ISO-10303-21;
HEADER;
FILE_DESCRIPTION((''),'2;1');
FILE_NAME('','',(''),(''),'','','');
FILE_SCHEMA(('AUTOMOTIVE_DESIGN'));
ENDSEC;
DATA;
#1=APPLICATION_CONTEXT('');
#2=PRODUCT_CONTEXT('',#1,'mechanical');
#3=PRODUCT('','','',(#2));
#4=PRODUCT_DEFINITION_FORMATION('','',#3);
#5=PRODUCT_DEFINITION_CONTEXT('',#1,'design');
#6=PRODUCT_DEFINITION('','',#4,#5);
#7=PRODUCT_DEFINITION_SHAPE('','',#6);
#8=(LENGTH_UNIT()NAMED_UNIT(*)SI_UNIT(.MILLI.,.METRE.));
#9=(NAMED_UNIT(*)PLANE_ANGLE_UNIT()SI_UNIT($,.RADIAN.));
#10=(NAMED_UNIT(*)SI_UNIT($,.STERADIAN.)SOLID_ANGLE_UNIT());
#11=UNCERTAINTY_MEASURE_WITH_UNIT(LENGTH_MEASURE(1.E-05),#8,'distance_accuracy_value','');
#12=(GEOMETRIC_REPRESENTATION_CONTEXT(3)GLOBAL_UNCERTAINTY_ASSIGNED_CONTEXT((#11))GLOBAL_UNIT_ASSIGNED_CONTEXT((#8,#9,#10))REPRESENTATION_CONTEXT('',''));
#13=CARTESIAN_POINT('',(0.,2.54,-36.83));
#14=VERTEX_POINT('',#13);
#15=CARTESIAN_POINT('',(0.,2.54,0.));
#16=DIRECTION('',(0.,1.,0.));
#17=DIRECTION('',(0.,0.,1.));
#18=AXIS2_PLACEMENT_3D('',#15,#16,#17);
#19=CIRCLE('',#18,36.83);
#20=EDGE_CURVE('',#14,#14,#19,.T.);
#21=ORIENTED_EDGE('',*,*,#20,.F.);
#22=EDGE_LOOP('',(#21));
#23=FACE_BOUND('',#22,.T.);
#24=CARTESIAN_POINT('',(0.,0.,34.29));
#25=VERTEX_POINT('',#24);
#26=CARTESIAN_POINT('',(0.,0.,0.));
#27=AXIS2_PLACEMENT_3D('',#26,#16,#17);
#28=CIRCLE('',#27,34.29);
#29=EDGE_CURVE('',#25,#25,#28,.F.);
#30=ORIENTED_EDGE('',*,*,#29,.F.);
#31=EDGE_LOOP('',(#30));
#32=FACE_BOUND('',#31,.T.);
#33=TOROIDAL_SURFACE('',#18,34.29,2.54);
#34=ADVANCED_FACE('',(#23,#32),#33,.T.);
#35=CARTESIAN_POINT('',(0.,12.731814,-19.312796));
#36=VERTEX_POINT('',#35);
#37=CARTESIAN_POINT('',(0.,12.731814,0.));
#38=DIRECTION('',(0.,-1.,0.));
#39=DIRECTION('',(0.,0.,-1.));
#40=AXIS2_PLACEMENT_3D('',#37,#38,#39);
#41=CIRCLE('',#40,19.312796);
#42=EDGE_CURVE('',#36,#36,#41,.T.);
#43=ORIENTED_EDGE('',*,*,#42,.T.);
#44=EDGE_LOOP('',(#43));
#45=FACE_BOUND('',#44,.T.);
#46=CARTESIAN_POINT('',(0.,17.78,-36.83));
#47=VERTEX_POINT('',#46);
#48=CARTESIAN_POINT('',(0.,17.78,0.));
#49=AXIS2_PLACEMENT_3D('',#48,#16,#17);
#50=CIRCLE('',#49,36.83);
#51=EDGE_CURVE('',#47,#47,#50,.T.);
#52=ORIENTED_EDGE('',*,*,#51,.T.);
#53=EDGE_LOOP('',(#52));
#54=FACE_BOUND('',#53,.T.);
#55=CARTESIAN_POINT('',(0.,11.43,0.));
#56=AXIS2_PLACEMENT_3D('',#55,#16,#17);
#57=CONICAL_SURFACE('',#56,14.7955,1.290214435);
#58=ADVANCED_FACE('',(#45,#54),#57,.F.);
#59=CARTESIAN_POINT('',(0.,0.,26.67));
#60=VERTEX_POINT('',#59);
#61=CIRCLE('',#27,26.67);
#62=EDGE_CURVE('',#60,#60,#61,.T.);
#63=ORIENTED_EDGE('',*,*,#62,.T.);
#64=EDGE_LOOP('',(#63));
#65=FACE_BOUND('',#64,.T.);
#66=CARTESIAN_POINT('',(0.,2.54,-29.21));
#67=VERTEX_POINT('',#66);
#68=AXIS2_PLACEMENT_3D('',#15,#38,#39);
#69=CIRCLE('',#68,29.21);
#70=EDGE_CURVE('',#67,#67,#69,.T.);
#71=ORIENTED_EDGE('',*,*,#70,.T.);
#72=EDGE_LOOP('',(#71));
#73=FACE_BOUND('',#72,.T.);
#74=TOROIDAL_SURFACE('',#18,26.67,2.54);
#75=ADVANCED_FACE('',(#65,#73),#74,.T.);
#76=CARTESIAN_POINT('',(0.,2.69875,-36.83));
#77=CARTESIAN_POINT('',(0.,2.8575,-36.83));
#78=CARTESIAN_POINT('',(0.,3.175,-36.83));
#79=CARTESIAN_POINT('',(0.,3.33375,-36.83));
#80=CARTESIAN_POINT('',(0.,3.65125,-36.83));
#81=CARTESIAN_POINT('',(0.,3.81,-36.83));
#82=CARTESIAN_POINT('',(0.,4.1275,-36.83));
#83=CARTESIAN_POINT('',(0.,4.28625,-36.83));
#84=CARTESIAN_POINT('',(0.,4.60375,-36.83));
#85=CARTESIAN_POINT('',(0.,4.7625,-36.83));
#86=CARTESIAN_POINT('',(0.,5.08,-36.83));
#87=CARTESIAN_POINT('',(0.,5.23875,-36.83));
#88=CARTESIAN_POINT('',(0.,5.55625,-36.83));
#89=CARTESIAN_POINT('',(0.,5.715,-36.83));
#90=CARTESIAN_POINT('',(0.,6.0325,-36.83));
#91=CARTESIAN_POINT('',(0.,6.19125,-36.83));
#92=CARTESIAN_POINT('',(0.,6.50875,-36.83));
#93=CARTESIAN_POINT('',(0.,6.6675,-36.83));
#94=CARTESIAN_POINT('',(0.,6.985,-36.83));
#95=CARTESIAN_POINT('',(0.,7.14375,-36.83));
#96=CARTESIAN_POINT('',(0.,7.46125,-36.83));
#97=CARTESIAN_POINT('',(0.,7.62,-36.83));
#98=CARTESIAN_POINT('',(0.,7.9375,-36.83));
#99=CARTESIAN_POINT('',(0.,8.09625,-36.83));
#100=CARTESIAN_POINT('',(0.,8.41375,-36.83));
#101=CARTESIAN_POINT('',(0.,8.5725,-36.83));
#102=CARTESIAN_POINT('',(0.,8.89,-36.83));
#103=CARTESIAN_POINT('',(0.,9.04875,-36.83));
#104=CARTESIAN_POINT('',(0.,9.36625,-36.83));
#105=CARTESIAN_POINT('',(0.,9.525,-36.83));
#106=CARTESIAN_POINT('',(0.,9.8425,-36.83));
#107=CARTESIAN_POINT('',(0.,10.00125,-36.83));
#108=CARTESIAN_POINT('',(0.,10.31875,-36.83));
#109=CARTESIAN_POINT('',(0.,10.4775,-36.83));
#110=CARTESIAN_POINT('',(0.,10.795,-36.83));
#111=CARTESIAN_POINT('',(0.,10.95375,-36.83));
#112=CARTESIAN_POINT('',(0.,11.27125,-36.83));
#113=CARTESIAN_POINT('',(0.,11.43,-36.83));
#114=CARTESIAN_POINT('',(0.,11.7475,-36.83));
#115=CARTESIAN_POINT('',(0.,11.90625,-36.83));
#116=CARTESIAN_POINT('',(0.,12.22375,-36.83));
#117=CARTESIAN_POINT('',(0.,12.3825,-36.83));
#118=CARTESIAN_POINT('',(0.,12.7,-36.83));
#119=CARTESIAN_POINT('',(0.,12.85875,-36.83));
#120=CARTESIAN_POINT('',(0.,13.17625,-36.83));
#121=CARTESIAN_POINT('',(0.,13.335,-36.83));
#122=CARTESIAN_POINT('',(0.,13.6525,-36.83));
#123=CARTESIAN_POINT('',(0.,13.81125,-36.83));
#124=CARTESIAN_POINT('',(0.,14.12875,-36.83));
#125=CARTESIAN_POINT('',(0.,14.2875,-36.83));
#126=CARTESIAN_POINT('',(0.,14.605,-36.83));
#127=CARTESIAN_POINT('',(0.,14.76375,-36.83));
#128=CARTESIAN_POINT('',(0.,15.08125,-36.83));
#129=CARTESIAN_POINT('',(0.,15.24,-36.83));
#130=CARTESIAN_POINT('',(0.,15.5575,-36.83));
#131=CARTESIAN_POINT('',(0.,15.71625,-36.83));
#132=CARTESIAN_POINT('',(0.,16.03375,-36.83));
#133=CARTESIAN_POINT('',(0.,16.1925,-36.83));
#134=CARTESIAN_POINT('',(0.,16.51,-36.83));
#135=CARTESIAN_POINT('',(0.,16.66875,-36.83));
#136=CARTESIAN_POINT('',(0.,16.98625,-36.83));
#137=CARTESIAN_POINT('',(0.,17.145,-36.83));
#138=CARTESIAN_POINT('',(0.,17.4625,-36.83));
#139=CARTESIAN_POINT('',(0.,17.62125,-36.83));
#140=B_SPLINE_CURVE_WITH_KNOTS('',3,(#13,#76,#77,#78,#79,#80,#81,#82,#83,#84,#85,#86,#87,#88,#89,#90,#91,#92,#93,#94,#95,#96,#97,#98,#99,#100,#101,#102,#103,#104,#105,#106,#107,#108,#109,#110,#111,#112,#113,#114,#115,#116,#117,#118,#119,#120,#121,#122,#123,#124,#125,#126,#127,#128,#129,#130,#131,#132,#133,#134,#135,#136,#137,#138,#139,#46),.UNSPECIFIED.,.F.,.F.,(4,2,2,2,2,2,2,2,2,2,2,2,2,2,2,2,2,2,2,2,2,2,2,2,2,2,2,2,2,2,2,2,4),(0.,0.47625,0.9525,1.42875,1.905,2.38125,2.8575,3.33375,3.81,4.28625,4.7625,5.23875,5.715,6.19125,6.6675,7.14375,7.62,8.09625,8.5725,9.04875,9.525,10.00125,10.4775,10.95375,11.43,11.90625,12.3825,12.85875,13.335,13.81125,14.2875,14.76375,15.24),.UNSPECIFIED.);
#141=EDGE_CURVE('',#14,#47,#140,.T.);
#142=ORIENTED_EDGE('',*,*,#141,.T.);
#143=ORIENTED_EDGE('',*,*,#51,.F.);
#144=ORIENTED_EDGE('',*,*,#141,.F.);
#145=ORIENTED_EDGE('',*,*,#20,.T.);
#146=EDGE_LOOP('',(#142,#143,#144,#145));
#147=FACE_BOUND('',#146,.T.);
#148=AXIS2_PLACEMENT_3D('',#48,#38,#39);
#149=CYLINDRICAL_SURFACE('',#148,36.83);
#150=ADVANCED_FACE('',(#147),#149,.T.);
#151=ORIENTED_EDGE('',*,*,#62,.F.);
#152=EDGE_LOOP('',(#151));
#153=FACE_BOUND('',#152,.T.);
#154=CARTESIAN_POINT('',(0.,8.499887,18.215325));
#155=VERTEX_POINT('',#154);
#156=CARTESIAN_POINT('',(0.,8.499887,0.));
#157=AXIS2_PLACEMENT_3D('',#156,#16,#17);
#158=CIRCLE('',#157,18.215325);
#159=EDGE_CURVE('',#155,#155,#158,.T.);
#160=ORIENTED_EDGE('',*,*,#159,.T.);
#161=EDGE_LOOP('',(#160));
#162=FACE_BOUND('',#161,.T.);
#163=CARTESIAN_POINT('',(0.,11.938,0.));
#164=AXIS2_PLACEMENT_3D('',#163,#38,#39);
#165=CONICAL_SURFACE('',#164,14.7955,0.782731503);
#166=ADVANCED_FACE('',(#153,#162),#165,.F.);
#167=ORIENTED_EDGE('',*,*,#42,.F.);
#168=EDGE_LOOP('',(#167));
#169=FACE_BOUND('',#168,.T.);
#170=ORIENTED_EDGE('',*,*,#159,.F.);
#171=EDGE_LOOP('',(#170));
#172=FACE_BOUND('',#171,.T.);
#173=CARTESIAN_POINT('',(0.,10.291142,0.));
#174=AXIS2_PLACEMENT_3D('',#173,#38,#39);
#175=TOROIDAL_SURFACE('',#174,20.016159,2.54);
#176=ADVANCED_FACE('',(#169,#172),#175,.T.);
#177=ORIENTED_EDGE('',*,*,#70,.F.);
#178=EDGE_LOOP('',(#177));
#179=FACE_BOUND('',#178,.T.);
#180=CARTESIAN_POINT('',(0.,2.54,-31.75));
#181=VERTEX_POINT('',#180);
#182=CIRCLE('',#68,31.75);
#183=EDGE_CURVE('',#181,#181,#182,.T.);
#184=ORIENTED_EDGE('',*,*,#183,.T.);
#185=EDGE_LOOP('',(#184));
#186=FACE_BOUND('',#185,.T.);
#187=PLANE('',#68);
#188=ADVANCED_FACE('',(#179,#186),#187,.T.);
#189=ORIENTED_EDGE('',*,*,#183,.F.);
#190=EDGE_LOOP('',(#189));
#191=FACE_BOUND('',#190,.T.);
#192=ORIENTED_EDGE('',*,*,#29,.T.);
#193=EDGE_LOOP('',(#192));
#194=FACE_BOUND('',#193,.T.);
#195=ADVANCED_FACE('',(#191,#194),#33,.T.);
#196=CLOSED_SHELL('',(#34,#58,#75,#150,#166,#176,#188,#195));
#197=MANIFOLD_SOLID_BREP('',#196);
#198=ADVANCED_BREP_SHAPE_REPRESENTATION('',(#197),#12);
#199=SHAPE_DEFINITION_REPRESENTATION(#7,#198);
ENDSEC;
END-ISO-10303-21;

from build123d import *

# Parameters (mm, degrees)
SKETCH1_R           = 36.83
BOSS_EXTRUDE1_DEPTH = 17.78
FILLET1_R           = 2.54
SKETCH2_R           = 26.67
SKETCH3_R           = 14.7955
SKETCH4_R           = 14.7955
CUT_EXTRUDE1_DEPTH  = 76.2
SKETCH7_R           = 14.7955
SKETCH6_R           = 36.83
SKETCH8_R           = 31.75
SKETCH8_R_2         = 29.21
CUT_EXTRUDE2_DEPTH  = 2.54
FILLET3_R           = 2.54
FILLET4_R           = 2.54
FILLET5_R           = 2.54


with BuildPart() as part:
    # Sketch1 → Boss-Extrude1 (new body)
    with BuildSketch(Plane(origin=(0, 0, 0), x_dir=(1, 0, 0), z_dir=(0, 1, 0))):
        with Locations(Location((0, 0, 0), (0, 0, 90))):
            Circle(SKETCH1_R)
    extrude(amount=BOSS_EXTRUDE1_DEPTH)

    # Fillet1
    fillet1_edges = [part.edges().sort_by_distance(p)[0] for p in [
        (0, 0, 36.83),
    ]]
    fillet(fillet1_edges, radius=FILLET1_R)

    # Sketch2 → Cut-Loft1 section 0
    with BuildSketch(Plane(origin=(0, 0, 0), x_dir=(1, 0, 0), z_dir=(0, 1, 0))):
        Circle(SKETCH2_R)
    # Sketch3 → Cut-Loft1 section 1
    with BuildSketch(Plane(origin=(0, 11.938, 0), x_dir=(1, 0, 0), z_dir=(0, 1, 0))):
        Circle(SKETCH3_R)
    loft(mode=Mode.SUBTRACT)

    # Sketch4 → Cut-Extrude1 (cut)
    with BuildSketch(Plane.XZ.offset(-11.938)):
        with Locations(Location((0, 0, 0), (0, 0, 270))):
            Circle(SKETCH4_R)
    extrude(amount=-CUT_EXTRUDE1_DEPTH, mode=Mode.SUBTRACT)

    # Sketch7 → Cut-Loft2 section 0
    with BuildSketch(Plane(origin=(0, 11.43, 0), x_dir=(1, 0, 0), z_dir=(0, 1, 0))):
        Circle(SKETCH7_R)
    # Sketch6 → Cut-Loft2 section 1
    with BuildSketch(Plane(origin=(0, 17.78, 0), x_dir=(1, 0, 0), z_dir=(0, 1, 0))):
        Circle(SKETCH6_R)
    loft(mode=Mode.SUBTRACT)

    # Sketch8 → Cut-Extrude2 (cut)
    with BuildSketch(Plane.XZ):
        with Locations(Location((0, 0, 0), (0, 0, 270))):
            Circle(SKETCH8_R)
        with Locations(Location((0, 0, 0), (0, 0, 270))):
            Circle(SKETCH8_R_2, mode=Mode.SUBTRACT)
    extrude(amount=-CUT_EXTRUDE2_DEPTH, mode=Mode.SUBTRACT)

    # Fillet3
    fillet3_edges = [part.edges().sort_by_distance(p)[0] for p in [
        (0, 0, 31.75),
    ]]
    fillet(fillet3_edges, radius=FILLET3_R - 0.0001)  # a hair under: the kernel refuses the full size

    # Fillet4
    fillet4_edges = [part.edges().sort_by_distance(p)[0] for p in [
        (0, 0, 29.21),
    ]]
    fillet(fillet4_edges, radius=FILLET4_R - 0.0001)  # a hair under: the kernel refuses the full size

    # Fillet5
    fillet5_edges = [part.edges().sort_by_distance(p)[0] for p in [
        (-15.18822317, 11.543176706, 0),
    ]]
    fillet(fillet5_edges, radius=FILLET5_R)


solid = part.part
